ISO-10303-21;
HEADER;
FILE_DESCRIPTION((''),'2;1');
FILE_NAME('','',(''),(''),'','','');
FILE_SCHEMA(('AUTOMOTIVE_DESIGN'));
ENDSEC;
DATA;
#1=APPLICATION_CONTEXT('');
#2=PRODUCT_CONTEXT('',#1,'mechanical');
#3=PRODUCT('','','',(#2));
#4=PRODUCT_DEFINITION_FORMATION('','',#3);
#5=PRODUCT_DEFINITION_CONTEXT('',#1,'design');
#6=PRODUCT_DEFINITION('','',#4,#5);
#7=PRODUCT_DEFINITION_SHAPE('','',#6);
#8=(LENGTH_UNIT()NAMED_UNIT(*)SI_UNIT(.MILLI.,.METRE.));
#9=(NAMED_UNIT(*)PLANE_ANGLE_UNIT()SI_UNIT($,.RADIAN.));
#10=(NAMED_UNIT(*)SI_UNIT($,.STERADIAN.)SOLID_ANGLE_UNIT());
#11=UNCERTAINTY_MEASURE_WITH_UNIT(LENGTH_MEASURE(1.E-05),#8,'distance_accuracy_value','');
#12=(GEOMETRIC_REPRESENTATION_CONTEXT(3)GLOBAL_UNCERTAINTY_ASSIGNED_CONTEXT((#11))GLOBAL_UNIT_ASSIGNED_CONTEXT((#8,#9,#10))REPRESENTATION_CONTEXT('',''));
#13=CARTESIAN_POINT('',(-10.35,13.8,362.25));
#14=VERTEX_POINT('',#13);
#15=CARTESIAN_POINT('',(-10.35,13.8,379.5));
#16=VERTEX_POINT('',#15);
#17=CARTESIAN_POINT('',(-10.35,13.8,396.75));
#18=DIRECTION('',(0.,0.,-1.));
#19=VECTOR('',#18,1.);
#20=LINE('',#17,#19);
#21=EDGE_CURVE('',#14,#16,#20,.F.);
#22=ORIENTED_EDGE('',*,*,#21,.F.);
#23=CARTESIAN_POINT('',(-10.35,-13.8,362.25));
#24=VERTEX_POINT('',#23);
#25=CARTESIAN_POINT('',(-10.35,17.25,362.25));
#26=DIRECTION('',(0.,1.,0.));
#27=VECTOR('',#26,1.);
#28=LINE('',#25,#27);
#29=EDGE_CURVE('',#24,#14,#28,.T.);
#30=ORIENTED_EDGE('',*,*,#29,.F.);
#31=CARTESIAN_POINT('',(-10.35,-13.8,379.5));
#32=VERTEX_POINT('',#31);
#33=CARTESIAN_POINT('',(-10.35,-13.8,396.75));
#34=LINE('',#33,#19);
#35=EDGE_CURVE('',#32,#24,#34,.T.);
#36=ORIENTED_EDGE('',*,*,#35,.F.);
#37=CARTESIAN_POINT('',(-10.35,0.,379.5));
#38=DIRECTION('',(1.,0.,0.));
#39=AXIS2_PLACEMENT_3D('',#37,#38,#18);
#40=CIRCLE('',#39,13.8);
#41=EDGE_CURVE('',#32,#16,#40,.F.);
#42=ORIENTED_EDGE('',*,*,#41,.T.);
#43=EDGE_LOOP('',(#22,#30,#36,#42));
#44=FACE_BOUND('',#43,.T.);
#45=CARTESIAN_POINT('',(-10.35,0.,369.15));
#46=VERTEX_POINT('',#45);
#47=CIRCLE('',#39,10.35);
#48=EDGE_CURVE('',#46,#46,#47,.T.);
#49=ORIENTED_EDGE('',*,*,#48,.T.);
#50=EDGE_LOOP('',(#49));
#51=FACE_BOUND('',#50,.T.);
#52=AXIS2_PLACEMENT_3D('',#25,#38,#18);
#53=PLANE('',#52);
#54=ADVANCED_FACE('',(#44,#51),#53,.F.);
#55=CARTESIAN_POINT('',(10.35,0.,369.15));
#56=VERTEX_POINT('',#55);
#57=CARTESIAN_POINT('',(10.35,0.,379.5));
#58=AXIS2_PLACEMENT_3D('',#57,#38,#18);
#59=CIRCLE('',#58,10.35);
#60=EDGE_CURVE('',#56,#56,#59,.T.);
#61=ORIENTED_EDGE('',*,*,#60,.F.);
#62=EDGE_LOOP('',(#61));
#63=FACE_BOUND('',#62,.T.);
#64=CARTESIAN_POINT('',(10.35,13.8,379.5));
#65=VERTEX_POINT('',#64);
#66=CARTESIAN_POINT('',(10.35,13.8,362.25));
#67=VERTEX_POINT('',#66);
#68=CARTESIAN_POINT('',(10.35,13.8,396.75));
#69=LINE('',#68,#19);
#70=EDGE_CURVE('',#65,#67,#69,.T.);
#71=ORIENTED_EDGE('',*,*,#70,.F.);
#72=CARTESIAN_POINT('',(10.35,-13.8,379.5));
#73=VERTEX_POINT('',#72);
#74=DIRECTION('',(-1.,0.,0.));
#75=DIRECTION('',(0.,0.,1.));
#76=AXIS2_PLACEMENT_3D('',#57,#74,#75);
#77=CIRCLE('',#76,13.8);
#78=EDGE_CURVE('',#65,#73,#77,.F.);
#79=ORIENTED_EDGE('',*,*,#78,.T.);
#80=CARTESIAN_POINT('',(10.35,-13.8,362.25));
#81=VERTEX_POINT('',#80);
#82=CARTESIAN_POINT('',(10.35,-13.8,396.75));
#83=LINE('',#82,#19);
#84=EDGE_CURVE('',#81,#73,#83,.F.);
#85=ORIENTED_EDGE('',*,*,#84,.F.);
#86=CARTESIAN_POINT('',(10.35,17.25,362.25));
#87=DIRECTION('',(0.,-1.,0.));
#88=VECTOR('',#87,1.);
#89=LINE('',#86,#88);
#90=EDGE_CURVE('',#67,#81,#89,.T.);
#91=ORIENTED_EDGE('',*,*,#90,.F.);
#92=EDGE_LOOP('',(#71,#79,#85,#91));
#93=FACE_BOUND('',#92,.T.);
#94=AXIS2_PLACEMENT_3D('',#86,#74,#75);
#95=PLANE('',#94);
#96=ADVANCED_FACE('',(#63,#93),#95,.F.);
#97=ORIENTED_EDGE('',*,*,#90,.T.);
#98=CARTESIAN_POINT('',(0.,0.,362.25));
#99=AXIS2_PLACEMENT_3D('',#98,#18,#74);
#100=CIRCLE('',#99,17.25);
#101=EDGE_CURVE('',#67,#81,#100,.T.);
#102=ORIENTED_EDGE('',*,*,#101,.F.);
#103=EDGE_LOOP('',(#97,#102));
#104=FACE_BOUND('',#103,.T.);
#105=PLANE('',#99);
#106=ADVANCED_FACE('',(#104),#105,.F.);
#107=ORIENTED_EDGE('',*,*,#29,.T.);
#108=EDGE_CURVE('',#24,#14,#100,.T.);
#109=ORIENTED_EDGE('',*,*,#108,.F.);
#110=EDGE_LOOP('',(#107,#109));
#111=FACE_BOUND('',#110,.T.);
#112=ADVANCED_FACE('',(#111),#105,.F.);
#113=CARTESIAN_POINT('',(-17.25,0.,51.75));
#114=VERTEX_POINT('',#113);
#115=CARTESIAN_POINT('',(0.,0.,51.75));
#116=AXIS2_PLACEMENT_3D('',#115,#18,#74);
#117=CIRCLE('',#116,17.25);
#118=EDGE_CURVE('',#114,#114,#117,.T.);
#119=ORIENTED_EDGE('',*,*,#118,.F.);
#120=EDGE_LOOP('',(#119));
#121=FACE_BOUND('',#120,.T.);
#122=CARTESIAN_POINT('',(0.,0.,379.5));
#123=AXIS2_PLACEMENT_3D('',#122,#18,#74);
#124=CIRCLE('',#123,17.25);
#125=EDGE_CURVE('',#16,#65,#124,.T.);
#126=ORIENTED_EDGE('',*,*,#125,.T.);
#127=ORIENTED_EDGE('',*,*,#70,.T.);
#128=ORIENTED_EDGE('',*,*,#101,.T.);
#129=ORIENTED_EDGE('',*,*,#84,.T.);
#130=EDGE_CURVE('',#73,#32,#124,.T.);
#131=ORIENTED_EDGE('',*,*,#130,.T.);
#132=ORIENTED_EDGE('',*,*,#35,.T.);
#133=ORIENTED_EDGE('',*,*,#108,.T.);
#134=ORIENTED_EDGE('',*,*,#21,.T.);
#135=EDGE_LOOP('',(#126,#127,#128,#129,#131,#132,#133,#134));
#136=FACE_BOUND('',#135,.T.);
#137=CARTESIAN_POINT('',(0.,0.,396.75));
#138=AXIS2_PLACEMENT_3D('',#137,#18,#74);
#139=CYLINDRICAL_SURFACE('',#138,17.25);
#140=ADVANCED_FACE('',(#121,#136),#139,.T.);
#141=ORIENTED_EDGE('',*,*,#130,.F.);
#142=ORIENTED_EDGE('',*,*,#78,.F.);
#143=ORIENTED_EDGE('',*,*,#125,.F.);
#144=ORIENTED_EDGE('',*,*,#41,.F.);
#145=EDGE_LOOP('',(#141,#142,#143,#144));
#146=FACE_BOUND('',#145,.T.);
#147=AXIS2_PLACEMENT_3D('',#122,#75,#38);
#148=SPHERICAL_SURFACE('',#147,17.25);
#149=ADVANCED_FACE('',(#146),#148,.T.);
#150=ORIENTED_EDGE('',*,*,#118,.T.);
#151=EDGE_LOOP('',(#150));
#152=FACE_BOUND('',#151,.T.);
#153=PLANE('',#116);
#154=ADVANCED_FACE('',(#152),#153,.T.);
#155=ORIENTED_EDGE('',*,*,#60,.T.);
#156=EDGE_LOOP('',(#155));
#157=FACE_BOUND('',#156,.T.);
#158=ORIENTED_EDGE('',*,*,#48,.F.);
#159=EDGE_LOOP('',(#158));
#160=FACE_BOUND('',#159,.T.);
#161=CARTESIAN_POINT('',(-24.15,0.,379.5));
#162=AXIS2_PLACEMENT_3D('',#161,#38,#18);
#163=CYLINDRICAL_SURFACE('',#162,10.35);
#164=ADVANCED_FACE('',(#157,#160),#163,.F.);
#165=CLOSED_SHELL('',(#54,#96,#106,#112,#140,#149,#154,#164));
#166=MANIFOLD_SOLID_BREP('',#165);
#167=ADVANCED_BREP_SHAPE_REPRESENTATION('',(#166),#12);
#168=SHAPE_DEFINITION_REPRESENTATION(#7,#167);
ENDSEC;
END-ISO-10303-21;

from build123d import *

# Parameters (mm, degrees)
SKETCH_1_R          = 50
EXTRUDE_1_DEPTH     = 1150
CUT_EXTRUDE_1_DEPTH = 100
SKETCH_3_R          = 30
CUT_EXTRUDE_2_DEPTH = 100
SKETCH_4_R          = 50
CUT_EXTRUDE_3_DEPTH = 100
SKETCH_6_R          = 72.906400888
CUT_EXTRUDE_4_DEPTH = 50
SCALE_1_SCALE       = 0.345


with BuildPart() as part:
    # 草图1 → 凸台-拉伸1 (new body)
    with BuildSketch(Plane.XY):
        Circle(SKETCH_1_R)
    extrude(amount=EXTRUDE_1_DEPTH)

    # 草图2 → 切除-拉伸1 (cut)
    with BuildSketch(Plane.XY.offset(1150)):
        Polygon((-30, 50), (-30, -50), (-82.719574124, -32.427051987), (-69.504020862, 45.153140313), align=None)
        Polygon((30, 50), (30, -50), (70.972415669, -45.887337717), (95.445662451, 11.135327286), align=None)
    extrude(amount=-CUT_EXTRUDE_1_DEPTH, mode=Mode.SUBTRACT)

    # 草图3 → 切除-拉伸2 (cut)
    with BuildSketch(Plane(origin=(30, 0, 0), x_dir=(0, 0, -1), z_dir=(1, 0, 0))):
        with Locations((-1100, 0)):
            Circle(SKETCH_3_R)
    extrude(amount=-CUT_EXTRUDE_2_DEPTH, mode=Mode.SUBTRACT)

    # 圆角1: read off the stored shape, not the designer's step
    # 圆角1 outline → 圆角1 (revolve, cut)
    with BuildSketch(Plane.XZ):
        with BuildLine():
            ThreePointArc((0, 1150), (35.355339077, 1135.355339042), (50, 1099.99999995))
            Line((50, 1099.99999995), (50, 1150))
            Line((50, 1150), (0, 1150))
        make_face()
    revolve(axis=Axis((0, 0, 0), (0, 0, 1)), mode=Mode.SUBTRACT)

    # 草图4 → 切除-拉伸3 (cut)
    with BuildSketch(Plane(origin=(0, 0, 0), x_dir=(-1, 0, 0), z_dir=(0, 0, -1))):
        Circle(SKETCH_4_R)
    extrude(amount=-CUT_EXTRUDE_3_DEPTH, mode=Mode.SUBTRACT)

    # 草图6 → 切除-拉伸4 (cut)
    with BuildSketch(Plane(origin=(0, 0, 100), x_dir=(-1, 0, 0), z_dir=(0, 0, -1))):
        Circle(SKETCH_6_R)
    extrude(amount=-CUT_EXTRUDE_4_DEPTH, mode=Mode.SUBTRACT)


with BuildPart() as part_1:
    # 缩放比例1: scaled about (0, 0, 0)
    add(part.part.scale(SCALE_1_SCALE))


solid = part_1.part
